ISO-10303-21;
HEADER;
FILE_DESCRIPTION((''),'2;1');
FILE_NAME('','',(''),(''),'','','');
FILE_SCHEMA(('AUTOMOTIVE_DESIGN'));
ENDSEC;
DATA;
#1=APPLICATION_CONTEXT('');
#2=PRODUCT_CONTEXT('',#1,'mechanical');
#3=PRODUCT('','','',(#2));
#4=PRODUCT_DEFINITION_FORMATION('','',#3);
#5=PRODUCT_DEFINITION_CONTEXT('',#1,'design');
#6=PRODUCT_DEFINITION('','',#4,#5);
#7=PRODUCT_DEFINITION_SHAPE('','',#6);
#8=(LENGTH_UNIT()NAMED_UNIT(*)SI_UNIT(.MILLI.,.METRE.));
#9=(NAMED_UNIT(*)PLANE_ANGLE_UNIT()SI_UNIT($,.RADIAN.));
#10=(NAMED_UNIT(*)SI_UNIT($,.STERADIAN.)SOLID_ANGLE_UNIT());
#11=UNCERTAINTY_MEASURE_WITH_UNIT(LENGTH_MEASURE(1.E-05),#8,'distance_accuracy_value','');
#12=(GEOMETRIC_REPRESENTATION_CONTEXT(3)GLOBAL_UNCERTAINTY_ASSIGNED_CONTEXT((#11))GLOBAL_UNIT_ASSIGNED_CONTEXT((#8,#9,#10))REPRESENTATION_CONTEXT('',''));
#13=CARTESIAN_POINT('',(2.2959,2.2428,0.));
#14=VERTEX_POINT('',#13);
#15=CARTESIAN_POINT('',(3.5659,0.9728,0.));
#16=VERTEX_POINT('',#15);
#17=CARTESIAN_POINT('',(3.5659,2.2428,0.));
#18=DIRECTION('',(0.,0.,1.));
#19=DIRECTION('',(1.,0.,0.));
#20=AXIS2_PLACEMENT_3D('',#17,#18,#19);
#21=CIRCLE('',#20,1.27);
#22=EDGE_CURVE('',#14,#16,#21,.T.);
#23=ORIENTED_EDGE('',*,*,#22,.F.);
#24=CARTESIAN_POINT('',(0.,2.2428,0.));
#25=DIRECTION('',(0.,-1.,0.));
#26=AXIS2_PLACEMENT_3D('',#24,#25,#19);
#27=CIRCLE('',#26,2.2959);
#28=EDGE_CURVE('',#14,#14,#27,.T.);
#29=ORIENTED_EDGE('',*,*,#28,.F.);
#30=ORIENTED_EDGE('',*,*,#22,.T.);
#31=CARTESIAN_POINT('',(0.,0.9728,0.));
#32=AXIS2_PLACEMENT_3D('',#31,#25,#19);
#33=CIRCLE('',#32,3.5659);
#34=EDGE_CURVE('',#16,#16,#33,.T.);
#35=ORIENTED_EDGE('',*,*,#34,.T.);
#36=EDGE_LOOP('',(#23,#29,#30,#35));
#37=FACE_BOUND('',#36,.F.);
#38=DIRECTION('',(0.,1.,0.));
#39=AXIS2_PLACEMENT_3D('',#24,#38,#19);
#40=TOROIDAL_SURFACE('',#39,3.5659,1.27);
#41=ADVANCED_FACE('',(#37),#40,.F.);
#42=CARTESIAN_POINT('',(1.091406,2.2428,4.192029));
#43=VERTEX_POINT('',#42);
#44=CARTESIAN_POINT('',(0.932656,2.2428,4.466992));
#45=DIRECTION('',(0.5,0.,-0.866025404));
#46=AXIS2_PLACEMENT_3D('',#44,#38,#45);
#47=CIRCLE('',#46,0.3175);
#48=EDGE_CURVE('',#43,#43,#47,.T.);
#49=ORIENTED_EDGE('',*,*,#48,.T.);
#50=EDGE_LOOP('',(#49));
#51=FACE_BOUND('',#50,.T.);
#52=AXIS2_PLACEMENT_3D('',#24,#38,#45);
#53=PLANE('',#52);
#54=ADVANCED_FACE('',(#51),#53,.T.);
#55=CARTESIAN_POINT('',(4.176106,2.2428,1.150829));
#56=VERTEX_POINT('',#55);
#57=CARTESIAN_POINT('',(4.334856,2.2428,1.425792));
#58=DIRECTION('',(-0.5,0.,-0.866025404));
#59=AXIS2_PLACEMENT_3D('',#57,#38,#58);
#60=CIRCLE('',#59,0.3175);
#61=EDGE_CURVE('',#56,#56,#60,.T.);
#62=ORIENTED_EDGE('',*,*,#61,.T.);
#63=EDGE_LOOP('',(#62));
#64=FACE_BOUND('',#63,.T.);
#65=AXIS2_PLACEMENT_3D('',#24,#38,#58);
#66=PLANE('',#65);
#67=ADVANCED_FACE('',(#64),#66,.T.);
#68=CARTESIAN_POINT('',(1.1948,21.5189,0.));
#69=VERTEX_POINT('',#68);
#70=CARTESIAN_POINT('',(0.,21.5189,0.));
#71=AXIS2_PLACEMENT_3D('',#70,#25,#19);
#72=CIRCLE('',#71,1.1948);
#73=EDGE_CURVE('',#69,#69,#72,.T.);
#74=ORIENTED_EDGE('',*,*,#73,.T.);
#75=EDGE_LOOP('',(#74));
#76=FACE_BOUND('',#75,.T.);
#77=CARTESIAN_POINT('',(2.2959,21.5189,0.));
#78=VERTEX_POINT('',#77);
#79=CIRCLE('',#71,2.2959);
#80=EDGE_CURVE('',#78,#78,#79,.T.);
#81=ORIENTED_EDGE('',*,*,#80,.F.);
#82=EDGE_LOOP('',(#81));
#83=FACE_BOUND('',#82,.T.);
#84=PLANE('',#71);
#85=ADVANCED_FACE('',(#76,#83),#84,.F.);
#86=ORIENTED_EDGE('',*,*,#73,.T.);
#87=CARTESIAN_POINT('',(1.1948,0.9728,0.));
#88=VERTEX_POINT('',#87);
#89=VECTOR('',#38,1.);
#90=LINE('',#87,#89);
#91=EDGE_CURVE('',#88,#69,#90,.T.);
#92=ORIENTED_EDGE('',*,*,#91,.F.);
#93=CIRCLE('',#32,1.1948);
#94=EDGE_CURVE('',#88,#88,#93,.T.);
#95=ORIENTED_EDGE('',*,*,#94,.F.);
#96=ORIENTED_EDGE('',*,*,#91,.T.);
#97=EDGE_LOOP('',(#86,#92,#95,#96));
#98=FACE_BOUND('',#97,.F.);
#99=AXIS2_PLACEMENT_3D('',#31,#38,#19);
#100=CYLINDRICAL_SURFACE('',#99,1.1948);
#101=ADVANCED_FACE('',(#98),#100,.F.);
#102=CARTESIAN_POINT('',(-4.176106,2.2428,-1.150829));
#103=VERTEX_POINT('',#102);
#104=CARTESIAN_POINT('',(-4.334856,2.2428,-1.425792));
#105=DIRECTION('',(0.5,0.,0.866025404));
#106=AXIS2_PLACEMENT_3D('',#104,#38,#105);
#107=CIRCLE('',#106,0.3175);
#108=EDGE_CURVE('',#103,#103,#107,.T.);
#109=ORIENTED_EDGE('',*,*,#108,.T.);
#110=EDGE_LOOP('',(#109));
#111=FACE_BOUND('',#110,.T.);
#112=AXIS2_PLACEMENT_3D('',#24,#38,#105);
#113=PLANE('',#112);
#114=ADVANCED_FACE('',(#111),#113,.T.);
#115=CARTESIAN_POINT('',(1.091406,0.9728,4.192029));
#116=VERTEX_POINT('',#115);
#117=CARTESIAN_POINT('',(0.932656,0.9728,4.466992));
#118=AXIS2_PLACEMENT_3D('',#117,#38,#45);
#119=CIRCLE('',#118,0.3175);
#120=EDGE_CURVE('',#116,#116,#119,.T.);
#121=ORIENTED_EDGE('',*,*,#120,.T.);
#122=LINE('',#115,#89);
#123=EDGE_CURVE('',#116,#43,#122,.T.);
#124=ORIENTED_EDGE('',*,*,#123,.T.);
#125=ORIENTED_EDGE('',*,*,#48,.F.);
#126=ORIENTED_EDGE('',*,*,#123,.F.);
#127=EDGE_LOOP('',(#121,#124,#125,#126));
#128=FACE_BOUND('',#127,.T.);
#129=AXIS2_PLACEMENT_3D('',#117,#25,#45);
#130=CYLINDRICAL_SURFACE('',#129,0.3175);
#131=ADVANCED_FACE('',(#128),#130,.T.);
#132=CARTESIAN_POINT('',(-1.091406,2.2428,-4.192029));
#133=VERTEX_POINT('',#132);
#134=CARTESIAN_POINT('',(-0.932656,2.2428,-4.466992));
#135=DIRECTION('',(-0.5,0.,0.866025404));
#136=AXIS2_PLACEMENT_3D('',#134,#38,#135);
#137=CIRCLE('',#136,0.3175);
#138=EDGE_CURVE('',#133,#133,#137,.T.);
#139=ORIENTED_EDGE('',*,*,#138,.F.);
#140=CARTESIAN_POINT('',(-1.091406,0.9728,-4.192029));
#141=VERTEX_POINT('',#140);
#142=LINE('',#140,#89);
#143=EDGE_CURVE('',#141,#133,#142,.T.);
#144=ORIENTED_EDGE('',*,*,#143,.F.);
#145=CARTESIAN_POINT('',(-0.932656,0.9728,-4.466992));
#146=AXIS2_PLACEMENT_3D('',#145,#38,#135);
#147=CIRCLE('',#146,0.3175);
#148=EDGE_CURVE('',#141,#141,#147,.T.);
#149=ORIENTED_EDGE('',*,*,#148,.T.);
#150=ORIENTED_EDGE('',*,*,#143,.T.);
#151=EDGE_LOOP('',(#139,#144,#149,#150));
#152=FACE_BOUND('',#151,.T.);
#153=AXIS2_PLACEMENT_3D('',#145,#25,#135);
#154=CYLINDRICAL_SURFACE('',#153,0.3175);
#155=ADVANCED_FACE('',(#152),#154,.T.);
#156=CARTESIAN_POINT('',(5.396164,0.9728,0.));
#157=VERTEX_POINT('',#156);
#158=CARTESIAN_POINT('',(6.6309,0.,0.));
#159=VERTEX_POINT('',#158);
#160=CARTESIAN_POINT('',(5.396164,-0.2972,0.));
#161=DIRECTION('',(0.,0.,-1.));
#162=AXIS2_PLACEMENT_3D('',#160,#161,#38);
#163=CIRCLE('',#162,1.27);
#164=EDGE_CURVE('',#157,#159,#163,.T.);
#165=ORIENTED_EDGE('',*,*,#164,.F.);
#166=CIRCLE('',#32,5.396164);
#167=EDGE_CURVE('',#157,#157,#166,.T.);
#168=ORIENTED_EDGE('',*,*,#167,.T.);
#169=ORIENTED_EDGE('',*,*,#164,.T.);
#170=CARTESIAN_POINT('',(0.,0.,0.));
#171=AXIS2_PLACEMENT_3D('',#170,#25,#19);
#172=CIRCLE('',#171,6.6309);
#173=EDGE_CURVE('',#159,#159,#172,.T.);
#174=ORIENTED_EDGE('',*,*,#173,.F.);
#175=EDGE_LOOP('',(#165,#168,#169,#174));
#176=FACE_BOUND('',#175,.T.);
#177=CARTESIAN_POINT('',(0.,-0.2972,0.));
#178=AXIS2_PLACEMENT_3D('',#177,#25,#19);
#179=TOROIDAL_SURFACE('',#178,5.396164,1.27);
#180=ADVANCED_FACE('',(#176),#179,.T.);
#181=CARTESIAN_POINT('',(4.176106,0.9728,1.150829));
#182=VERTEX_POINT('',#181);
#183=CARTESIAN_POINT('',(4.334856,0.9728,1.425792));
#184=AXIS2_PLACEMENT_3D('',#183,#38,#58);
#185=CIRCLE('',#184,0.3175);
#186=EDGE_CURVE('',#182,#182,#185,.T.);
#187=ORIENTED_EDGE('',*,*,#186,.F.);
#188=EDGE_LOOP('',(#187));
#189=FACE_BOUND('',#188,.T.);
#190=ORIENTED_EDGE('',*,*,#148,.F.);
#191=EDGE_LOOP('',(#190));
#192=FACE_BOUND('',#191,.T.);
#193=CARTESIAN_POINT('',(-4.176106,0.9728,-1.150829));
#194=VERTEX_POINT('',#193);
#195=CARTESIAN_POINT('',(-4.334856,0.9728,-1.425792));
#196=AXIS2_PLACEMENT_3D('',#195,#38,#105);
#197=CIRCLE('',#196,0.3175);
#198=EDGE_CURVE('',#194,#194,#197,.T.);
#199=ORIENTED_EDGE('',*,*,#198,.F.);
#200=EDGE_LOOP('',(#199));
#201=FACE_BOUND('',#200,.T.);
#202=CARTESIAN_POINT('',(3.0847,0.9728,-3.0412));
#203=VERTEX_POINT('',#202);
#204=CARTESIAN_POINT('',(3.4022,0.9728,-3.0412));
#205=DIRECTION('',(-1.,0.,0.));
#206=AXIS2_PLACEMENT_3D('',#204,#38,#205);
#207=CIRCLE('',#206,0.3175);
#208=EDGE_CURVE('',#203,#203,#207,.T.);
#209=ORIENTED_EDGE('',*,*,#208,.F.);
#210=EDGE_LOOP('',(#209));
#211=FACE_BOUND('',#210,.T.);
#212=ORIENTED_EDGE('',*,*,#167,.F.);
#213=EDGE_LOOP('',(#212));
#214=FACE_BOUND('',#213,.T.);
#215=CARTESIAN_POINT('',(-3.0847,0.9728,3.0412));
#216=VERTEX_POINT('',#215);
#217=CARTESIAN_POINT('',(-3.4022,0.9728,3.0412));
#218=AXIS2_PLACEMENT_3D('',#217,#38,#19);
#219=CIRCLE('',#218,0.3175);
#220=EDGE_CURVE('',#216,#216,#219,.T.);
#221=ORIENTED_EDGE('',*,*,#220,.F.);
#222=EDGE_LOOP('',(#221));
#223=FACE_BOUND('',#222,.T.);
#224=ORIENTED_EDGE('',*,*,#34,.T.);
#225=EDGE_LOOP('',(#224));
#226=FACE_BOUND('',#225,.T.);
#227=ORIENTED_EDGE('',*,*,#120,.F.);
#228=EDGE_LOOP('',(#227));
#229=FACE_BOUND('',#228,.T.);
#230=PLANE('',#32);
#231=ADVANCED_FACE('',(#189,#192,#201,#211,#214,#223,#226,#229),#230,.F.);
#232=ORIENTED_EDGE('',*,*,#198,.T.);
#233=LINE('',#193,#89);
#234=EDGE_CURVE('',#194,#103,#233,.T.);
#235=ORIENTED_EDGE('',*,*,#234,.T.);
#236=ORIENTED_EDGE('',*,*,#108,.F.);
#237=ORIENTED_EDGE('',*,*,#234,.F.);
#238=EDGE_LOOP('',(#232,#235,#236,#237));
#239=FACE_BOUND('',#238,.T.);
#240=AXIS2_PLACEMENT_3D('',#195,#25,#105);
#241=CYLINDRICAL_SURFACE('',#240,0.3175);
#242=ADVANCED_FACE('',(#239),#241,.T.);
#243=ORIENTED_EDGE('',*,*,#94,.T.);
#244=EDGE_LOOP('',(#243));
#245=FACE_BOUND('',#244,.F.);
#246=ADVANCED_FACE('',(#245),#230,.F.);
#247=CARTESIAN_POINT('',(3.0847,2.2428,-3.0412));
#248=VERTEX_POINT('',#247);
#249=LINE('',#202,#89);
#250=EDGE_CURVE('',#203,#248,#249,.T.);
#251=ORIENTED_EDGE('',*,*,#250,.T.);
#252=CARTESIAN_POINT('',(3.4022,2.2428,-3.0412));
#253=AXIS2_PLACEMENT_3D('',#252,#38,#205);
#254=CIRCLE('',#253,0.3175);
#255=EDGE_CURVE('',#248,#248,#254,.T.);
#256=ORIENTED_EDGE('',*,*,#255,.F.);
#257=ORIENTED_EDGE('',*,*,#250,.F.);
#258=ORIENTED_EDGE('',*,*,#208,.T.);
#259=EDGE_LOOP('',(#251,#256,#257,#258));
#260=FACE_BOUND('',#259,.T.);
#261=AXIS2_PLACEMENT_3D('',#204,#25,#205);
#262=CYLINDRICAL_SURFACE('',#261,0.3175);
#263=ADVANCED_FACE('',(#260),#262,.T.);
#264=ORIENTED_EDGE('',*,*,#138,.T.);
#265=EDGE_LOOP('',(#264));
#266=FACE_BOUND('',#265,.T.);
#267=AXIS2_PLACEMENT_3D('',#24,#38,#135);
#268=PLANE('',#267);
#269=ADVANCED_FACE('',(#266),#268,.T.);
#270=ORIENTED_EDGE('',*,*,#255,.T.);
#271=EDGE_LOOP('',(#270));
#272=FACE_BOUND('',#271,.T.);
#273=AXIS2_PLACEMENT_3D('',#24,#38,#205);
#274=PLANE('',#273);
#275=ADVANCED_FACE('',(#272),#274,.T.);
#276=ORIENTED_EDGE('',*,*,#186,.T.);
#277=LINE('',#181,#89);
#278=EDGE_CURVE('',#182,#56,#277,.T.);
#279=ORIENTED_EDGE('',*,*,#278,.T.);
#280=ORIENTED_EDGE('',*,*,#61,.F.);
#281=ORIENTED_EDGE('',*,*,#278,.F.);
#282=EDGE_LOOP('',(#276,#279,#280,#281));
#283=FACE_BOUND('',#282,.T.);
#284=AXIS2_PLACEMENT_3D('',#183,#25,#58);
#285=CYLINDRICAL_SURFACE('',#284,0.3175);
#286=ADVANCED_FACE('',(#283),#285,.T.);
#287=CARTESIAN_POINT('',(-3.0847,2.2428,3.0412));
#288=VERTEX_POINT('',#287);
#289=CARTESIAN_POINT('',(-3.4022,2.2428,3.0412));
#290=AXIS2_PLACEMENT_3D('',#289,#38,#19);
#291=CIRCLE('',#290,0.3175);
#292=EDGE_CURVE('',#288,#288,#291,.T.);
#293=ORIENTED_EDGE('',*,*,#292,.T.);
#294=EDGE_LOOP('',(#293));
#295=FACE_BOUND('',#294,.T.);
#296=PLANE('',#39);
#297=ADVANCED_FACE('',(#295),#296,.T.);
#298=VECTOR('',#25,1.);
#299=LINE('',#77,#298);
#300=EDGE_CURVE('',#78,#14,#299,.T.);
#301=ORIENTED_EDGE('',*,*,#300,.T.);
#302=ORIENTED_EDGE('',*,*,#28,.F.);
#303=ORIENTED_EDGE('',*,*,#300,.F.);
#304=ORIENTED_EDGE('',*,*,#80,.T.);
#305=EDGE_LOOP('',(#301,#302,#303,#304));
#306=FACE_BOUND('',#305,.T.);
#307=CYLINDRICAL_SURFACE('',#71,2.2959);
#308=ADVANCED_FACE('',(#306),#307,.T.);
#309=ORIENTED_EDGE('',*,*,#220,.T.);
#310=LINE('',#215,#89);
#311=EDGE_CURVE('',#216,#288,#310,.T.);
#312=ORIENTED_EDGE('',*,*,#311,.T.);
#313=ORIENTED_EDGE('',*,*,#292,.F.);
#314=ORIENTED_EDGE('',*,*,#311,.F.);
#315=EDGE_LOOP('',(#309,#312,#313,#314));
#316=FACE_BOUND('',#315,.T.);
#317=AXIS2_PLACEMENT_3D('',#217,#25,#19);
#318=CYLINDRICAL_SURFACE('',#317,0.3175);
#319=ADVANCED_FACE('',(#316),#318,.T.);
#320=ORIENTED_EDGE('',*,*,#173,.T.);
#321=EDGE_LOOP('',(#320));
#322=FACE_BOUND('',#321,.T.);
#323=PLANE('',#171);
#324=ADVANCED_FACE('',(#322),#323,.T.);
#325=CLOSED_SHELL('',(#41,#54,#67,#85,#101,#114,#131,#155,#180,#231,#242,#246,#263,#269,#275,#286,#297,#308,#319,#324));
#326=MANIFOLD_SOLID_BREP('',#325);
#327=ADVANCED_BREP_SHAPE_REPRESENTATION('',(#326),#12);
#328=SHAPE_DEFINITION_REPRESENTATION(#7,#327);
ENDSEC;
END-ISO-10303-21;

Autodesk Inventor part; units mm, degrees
ref_plane "YZ Plane" through (0, 0, 0) normal (1, 0, 0) x (0, 1, 0)
ref_plane "XZ Plane" through (0, 0, 0) normal (0, 1, 0) x (-1, 0, 0)
ref_plane "XY Plane" through (0, 0, 0) normal (0, 0, 1) x (1, 0, 0)
sketch "Sketch1" plane through (0, 0, 0) normal (0, 0, 1) x (1, 0, 0)
  line L0 (1.1948, 21.5189) -> (2.2959, 21.5189)
  line L1 (6.6309, 0) -> (1.1948, 0)
  line L2 (1.1948, 0.9728) -> (1.1948, 21.5189)
  line L3 (2.2959, 21.5189) -> (2.2959, 0.9728)
  line L4 (2.2959, 0.9728) -> (6.6309, 0.9728)
  line L5 (6.6309, 0.9728) -> (6.6309, 0)
  line L6 (1.1948, 0.9728) -> (0, 0.9728)
  line L7 (0, 0.9728) -> (0, 0)
  line L8 (0, 0) -> (1.1948, 0)
revolve "Revolution1" add sketch "Sketch1" angle 360 about axis through (0, 0.9728, 0) along (0, -1, 0)
fillet "Fillet1" radius 1.27 1 edges at (-2.2959, 0.9728, 0)
fillet "Fillet2" radius 1.27 1 edges at (-6.6309, 0.9728, 0)
sketch "Sketch2" plane through (0, 0.9728, 0) normal (0, 1, 0) x (1, 0, 0)
  circle A0 centre (0, 0) radius 3.5659 projected
  circle A1 centre (0, 0) radius 5.3961 projected
  circle A2 centre (-0.0164, -4.5633) radius 0.3175
  circle A3 centre (1.841, -4.1755) radius 0.3175
  circle A4 centre (3.3802, -3.0657) radius 0.3175
  circle A5 centre (4.3349, -1.4258) radius 0.3175
  circle A6 centre (4.54, 0.4606) radius 0.3175
  circle A7 centre (3.9602, 2.2674) radius 0.3175
  circle A8 centre (2.6955, 3.6821) radius 0.3175
  circle A9 centre (0.9648, 4.4602) radius 0.3175
  circle A10 centre (-0.9327, 4.467) radius 0.3175
  circle A11 centre (-2.6689, 3.7015) radius 0.3175
  circle A12 centre (-3.9437, 2.2959) radius 0.3175
  circle A13 centre (-4.5366, 0.4933) radius 0.3175
  circle A14 centre (-4.345, -1.3945) radius 0.3175
  circle A15 centre (-3.4022, -3.0412) radius 0.3175
  circle A16 centre (-1.8711, -4.1621) radius 0.3175
  point P0 (0, 0)
  dimension "d3" = 0.635
  dimension "d6" = 360
extrude "Extrusion1" add sketch "Sketch2" along normal blind 1.27 contours A15
pattern_circular "Circular Pattern1" count 6 over 360 about axis through (0, -10, 0) along (0, 1, 0) of "Extrusion1"
properties part number "flume-nursery"
